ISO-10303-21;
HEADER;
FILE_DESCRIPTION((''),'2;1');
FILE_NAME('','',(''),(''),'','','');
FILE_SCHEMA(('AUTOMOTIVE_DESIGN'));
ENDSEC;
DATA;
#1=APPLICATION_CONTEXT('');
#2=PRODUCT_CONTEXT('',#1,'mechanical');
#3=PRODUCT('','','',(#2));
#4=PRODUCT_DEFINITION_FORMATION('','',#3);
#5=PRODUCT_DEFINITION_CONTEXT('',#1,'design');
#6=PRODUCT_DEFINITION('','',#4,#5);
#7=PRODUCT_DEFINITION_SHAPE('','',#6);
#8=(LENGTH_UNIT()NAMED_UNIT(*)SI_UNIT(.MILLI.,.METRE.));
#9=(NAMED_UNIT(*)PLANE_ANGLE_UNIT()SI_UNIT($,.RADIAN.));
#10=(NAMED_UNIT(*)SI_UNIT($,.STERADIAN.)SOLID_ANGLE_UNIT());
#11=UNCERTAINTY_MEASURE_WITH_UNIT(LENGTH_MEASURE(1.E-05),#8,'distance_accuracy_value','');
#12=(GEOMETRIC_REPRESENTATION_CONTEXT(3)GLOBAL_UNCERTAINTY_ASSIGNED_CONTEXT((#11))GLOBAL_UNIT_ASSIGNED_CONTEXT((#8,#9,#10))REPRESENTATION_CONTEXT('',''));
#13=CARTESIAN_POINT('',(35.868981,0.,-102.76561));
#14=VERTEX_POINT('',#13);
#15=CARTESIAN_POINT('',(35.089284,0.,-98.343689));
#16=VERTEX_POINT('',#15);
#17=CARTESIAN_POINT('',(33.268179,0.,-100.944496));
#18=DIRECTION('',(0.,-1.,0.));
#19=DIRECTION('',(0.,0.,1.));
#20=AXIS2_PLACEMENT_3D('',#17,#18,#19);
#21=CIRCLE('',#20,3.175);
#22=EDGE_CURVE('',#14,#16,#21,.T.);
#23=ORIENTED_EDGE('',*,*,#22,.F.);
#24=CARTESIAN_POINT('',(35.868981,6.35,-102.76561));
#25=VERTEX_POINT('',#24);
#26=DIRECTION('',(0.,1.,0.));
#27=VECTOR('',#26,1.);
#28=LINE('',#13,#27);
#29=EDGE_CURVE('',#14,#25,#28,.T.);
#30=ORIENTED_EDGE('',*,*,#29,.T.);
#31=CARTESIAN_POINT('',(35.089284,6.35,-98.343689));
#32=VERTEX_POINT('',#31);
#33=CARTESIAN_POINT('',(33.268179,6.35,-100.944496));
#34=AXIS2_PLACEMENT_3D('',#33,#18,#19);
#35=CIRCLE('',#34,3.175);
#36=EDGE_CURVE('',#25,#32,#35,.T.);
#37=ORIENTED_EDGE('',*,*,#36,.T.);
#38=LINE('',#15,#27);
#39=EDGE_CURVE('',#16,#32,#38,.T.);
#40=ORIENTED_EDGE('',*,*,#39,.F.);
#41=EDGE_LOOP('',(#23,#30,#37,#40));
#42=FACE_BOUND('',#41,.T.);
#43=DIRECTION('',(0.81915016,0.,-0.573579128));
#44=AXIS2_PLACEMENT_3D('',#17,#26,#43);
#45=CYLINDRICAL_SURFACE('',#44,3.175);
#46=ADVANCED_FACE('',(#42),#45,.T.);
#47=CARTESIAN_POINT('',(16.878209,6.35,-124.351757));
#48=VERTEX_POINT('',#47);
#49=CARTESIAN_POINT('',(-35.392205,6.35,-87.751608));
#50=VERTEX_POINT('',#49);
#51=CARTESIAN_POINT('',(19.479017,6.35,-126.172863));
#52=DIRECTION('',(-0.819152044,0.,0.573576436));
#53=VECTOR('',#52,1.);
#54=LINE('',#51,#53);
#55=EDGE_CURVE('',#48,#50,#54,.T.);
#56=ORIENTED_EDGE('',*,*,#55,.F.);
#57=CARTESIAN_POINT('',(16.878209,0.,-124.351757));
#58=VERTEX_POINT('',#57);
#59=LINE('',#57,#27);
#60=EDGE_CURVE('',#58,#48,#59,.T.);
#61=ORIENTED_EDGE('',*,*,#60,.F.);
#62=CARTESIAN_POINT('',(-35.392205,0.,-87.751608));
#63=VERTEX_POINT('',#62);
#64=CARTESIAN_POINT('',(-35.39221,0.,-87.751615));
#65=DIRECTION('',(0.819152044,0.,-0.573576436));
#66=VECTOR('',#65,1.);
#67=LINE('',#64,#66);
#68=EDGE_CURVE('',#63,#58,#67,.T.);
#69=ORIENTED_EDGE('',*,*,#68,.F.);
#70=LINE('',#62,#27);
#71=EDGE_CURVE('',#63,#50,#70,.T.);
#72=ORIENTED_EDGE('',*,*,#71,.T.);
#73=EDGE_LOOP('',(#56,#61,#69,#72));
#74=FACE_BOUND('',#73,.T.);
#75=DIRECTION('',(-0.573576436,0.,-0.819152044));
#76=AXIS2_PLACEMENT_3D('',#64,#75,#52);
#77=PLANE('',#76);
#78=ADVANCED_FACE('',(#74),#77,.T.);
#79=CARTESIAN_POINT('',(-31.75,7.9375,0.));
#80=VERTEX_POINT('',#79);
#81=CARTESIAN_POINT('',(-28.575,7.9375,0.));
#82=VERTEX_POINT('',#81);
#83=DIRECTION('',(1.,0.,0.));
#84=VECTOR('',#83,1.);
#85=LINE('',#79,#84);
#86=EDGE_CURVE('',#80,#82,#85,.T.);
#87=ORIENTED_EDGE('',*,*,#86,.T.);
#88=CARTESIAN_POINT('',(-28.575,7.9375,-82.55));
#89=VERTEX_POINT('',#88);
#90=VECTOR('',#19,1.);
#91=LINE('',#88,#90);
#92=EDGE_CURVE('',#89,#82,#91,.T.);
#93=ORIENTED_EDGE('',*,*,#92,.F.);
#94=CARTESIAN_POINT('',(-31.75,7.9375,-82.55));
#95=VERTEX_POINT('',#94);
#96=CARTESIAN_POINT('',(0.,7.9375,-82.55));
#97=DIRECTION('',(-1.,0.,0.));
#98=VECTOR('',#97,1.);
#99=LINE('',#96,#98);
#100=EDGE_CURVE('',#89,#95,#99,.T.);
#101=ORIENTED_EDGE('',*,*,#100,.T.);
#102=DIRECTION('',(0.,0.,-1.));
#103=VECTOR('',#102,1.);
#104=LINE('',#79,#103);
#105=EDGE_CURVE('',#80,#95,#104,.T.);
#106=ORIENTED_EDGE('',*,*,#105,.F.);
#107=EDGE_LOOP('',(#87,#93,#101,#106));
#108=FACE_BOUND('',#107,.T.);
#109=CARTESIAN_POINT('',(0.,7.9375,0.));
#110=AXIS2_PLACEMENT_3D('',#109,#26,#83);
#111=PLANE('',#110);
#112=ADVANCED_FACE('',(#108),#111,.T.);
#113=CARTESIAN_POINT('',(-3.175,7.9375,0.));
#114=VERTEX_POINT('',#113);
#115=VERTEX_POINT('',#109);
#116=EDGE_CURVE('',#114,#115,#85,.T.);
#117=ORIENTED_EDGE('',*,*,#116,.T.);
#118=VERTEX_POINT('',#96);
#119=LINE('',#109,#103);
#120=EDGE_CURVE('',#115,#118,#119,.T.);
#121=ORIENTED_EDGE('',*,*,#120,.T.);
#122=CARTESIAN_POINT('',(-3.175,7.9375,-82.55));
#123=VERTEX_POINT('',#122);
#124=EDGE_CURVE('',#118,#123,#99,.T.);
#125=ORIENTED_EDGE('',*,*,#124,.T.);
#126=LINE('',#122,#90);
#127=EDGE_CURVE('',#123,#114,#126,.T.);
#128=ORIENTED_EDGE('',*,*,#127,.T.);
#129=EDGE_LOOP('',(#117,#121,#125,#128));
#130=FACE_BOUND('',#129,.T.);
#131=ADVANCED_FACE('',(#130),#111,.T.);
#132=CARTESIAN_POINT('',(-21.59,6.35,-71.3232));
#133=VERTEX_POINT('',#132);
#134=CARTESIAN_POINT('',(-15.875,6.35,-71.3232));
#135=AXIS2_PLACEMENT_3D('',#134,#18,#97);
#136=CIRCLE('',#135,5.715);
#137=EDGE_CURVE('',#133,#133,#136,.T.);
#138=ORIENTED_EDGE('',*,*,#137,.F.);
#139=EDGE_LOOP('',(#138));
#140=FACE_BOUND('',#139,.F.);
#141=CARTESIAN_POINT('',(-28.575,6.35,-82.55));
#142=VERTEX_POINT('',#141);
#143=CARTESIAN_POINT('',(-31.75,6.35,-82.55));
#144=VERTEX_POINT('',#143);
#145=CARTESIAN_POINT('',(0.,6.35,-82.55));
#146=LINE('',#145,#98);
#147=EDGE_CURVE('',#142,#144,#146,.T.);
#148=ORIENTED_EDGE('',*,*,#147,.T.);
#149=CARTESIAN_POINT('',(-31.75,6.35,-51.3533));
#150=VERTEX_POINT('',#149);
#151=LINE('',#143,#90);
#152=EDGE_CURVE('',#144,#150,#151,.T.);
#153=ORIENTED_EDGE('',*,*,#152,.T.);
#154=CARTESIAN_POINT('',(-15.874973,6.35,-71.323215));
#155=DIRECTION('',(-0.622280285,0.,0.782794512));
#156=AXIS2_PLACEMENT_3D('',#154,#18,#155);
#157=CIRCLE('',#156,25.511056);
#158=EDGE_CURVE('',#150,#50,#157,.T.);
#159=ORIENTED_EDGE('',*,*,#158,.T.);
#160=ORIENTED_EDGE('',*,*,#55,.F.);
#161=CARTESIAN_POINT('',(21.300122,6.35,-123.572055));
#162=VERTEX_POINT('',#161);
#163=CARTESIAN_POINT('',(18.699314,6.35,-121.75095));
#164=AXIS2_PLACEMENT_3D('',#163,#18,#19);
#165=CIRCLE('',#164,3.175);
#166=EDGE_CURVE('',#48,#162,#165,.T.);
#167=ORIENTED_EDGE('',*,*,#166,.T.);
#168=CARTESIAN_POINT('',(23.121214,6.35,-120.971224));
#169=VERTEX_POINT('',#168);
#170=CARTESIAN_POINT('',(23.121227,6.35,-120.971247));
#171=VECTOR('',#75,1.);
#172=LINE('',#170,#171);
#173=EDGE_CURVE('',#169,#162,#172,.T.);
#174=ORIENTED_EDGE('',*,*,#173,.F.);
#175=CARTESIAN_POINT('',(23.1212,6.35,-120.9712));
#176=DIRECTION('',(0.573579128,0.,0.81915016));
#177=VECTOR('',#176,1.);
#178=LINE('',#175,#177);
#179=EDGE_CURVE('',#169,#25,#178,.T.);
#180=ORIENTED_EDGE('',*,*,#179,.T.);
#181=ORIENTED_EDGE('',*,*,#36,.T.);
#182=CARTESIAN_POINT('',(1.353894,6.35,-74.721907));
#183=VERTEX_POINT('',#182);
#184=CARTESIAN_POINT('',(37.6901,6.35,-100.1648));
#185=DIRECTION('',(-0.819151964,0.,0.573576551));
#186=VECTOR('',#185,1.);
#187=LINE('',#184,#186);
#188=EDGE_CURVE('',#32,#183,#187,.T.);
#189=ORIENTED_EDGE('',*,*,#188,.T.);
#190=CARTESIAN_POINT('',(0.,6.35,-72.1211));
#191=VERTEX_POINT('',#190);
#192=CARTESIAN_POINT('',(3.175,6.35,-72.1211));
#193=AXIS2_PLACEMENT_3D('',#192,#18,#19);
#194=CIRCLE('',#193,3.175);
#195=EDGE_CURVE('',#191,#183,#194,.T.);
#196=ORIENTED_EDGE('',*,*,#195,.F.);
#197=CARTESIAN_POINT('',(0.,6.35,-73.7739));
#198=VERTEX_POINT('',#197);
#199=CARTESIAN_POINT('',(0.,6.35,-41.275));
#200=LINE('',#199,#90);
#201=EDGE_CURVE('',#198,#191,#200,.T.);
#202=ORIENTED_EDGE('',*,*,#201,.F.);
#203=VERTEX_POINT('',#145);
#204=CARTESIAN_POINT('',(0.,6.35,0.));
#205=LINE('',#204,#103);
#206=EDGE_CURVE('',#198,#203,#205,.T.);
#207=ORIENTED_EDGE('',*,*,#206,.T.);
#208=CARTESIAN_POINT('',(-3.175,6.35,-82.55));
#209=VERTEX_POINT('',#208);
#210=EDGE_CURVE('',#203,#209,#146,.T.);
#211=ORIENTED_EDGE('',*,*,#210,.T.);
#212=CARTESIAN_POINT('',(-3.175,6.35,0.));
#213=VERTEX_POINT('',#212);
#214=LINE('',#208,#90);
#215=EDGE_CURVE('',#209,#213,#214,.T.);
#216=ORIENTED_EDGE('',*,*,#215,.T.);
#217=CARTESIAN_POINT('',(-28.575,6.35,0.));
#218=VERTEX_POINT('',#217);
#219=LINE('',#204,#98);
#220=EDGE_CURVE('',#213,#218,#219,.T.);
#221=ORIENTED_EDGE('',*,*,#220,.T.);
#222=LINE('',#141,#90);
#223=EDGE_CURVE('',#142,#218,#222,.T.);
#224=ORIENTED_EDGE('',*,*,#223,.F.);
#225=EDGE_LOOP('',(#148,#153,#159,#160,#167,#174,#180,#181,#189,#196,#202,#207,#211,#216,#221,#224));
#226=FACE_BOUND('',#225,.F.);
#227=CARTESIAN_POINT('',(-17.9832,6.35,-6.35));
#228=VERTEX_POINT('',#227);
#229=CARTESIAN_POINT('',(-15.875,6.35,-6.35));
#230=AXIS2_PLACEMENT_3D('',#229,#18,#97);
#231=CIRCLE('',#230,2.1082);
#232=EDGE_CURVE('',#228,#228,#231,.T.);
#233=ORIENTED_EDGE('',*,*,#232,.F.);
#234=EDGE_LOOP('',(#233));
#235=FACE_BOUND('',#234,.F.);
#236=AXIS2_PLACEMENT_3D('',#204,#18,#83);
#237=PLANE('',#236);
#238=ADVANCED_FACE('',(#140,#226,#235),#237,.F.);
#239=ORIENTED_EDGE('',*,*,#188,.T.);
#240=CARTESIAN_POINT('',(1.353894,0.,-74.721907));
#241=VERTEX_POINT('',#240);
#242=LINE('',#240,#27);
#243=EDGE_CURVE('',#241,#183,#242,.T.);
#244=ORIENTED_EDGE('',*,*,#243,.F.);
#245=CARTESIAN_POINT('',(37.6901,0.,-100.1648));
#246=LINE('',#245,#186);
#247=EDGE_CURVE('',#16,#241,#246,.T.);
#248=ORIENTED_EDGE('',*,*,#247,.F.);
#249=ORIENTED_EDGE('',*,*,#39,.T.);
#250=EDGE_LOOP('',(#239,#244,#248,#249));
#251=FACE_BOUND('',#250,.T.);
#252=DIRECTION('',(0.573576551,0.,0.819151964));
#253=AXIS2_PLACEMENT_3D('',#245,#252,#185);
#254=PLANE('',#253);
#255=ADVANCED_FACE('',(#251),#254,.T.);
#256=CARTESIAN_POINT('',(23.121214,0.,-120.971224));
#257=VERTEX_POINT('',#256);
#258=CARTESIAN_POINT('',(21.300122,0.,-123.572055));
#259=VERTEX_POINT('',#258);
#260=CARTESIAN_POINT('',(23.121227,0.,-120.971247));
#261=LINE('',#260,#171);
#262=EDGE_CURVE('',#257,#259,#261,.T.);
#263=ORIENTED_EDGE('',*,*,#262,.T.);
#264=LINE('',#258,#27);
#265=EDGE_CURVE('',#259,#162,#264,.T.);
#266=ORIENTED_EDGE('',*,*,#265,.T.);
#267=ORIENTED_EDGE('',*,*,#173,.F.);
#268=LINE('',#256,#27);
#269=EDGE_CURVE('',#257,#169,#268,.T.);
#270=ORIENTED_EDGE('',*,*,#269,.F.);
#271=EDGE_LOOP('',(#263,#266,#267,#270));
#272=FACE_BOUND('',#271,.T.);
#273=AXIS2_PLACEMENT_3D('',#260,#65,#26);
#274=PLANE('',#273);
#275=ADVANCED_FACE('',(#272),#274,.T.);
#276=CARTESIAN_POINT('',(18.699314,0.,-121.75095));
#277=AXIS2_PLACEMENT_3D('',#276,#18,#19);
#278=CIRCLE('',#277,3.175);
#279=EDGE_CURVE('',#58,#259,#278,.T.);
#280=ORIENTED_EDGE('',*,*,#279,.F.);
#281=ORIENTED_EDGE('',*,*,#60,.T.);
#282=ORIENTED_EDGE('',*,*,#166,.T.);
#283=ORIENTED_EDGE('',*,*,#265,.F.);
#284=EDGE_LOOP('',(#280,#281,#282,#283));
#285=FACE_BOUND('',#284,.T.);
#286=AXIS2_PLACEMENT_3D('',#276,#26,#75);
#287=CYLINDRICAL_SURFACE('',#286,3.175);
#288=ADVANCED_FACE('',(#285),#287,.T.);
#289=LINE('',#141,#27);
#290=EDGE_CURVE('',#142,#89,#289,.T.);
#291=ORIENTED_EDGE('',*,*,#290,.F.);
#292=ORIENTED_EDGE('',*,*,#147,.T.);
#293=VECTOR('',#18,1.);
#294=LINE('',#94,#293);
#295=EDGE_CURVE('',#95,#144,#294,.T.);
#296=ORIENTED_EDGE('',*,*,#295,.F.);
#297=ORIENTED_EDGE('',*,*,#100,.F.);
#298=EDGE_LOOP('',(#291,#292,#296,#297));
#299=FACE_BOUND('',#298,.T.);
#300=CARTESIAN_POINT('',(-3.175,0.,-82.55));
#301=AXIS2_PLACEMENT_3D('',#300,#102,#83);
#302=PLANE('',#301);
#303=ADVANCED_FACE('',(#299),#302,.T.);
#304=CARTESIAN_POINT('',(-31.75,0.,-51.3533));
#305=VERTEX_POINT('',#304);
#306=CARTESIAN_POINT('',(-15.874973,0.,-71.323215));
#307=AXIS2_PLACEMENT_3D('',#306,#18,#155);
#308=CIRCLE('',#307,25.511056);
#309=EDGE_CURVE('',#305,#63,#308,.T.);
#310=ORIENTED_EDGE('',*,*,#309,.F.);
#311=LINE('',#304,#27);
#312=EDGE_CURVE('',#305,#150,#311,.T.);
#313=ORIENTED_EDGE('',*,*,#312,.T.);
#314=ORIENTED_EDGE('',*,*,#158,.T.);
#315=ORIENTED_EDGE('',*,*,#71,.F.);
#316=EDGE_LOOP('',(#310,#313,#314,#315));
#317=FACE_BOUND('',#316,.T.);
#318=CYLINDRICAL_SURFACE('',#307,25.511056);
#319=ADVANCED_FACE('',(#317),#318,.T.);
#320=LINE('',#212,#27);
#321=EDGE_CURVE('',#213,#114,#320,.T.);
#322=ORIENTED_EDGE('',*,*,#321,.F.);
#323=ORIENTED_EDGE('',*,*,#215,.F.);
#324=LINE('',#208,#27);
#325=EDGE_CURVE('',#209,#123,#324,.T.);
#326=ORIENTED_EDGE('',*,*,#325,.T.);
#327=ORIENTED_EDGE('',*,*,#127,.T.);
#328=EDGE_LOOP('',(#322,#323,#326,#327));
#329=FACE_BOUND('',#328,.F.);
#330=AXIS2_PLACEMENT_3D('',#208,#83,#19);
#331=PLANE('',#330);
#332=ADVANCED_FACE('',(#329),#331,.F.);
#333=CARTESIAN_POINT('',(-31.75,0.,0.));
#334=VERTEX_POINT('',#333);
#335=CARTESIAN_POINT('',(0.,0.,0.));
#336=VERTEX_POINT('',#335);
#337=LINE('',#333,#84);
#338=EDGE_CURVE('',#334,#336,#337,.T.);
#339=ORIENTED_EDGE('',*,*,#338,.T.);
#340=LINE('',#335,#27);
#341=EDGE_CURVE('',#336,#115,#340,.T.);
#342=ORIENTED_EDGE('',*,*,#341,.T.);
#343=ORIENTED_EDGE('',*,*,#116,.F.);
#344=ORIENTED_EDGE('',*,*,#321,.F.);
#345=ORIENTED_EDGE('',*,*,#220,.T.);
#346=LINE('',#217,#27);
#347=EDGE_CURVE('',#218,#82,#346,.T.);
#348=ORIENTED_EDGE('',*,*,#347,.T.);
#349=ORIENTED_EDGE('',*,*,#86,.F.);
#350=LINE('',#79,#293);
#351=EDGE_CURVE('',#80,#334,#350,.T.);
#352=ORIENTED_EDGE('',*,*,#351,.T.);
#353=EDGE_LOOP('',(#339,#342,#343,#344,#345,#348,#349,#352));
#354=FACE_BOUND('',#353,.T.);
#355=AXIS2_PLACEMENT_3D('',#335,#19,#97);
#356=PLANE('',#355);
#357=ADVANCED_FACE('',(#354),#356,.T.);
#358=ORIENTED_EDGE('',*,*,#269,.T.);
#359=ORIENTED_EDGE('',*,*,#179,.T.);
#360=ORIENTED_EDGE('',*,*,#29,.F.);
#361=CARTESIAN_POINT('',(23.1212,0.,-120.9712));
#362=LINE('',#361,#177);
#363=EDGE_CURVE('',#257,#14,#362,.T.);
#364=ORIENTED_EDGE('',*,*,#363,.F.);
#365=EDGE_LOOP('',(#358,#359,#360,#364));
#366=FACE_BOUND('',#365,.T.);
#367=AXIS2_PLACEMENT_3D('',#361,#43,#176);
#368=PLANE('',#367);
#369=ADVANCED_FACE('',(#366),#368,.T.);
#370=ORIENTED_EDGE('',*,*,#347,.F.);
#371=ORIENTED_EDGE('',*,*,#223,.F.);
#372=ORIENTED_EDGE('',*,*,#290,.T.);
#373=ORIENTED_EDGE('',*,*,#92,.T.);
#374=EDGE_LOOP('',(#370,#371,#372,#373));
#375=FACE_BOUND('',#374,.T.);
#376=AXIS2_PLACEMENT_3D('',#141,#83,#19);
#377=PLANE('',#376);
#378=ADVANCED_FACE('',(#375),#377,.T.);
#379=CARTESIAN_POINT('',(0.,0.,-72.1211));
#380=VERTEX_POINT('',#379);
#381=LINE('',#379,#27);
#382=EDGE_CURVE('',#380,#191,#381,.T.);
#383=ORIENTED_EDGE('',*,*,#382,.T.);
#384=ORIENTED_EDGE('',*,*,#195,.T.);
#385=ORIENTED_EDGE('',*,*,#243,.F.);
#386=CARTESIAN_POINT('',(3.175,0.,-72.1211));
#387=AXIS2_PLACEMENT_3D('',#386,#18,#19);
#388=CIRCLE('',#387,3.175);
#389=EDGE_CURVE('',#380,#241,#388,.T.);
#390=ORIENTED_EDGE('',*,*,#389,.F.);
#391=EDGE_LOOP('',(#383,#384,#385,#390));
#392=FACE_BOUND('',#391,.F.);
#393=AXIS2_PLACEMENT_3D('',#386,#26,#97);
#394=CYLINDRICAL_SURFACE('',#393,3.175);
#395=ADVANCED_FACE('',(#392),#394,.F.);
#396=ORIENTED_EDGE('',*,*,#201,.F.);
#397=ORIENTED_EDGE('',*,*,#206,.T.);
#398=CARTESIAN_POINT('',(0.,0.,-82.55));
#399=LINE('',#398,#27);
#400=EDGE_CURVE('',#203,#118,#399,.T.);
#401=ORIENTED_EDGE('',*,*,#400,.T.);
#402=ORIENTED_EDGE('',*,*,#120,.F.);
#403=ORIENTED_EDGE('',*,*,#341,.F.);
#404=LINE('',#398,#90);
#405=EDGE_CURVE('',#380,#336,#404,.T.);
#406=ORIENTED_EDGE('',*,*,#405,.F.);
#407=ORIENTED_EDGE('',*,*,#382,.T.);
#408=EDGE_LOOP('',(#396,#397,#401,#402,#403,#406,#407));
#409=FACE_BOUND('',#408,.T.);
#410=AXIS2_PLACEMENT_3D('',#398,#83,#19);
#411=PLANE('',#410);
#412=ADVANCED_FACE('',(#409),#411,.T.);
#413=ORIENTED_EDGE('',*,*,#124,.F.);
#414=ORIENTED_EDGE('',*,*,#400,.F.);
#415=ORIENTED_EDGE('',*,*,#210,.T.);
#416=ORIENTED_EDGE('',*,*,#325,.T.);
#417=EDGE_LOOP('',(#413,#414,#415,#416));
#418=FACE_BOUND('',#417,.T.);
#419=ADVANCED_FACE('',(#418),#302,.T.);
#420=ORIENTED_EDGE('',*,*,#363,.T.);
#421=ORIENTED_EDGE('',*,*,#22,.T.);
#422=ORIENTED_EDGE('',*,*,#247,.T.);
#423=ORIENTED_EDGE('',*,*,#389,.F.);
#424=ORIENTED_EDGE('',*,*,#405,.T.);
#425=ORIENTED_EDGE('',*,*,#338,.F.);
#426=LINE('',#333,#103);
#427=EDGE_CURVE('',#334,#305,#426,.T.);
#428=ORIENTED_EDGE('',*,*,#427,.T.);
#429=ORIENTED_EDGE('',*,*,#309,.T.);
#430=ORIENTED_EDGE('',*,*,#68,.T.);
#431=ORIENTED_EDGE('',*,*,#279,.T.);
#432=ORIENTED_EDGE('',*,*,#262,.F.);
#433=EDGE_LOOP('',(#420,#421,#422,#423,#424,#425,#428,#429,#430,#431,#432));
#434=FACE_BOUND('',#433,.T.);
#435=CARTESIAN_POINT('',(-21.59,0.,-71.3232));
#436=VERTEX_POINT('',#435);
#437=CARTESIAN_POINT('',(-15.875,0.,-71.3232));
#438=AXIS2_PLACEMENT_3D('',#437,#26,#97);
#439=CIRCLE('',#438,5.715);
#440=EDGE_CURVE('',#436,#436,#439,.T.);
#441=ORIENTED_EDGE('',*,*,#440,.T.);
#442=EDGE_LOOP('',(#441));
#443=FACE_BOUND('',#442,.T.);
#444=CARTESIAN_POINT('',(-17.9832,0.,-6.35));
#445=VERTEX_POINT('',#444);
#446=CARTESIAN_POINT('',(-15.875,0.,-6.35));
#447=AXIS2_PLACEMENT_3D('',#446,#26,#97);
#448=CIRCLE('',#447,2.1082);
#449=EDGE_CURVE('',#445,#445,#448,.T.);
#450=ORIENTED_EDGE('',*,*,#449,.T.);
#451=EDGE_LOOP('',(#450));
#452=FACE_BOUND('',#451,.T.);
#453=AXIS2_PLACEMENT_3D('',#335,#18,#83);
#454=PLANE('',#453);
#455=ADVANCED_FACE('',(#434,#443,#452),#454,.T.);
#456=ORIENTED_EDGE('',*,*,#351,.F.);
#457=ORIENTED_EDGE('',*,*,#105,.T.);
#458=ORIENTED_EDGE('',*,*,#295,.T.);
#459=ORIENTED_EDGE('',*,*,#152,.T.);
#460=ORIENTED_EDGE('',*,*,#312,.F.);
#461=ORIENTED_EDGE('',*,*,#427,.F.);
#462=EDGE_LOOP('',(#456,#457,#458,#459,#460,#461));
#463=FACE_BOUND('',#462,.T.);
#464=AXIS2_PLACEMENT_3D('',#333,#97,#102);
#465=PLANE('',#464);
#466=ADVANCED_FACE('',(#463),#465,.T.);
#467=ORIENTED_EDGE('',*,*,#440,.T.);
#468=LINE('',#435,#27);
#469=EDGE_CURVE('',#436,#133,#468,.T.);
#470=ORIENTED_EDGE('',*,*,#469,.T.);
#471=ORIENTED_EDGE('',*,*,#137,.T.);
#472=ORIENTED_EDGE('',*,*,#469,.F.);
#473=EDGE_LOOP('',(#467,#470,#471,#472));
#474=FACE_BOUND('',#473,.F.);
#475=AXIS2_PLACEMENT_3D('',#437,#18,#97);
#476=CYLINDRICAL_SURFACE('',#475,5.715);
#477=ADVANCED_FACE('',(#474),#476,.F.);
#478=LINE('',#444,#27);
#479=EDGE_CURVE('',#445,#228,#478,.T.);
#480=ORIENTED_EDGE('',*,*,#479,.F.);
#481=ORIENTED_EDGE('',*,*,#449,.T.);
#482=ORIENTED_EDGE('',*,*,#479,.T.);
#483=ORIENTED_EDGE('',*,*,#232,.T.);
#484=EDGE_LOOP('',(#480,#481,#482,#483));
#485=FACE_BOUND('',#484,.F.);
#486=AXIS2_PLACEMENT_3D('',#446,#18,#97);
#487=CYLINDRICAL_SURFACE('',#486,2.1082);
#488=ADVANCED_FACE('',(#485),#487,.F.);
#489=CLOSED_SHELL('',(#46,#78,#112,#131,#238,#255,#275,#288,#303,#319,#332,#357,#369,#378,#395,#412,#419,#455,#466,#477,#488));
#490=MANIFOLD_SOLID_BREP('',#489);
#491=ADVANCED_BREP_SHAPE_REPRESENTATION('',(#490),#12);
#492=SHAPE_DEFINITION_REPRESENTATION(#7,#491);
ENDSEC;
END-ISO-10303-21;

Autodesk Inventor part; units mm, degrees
ref_plane "YZ Plane" through (0, 0, 0) normal (1, 0, 0) x (0, 1, 0)
ref_plane "XZ Plane" through (0, 0, 0) normal (0, 1, 0) x (-1, 0, 0)
ref_plane "XY Plane" through (0, 0, 0) normal (0, 0, 1) x (1, 0, 0)
sketch "Sketch1" plane through (0, 0, 0) normal (0, 1, 0) x (-1, 0, 0)
  line L0 (0, 0) -> (31.75, 0)
  line L1 (31.75, 0) -> (31.75, -82.55)
  line L2 (31.75, -82.55) -> (0, -82.55)
  line L3 (0, -82.55) -> (0, 0)
  line L4 (31.75, -82.55) -> (28.575, -82.55)
  line L5 (0, -82.55) -> (3.175, -82.55)
  line L6 (3.175, -82.55) -> (0, -82.55)
  line L7 (0, -82.55) -> (0, 0)
  line L8 (0, 0) -> (3.175, 0)
  line L9 (3.175, 0) -> (3.175, -82.55)
  line L10 (28.575, -82.55) -> (31.75, -82.55)
  line L11 (31.75, -82.55) -> (31.75, 0)
  line L12 (31.75, 0) -> (28.575, 0)
  line L13 (28.575, 0) -> (28.575, -82.55)
  line L14 (15.875, 0) -> (15.875, -6.35)
  circle A0 centre (15.875, -6.35) radius 2.1082
  line L15 (15.875, -6.35) -> (15.875, -71.3232)
  circle A1 centre (15.875, -71.3232) radius 5.715
  dimension "d0" = 31.75
  dimension "d1" = 3.175
  dimension "d2" = 3.175
  dimension "d3" = 82.55
  dimension "d4" = 6.35
  dimension "d5" = 4.2164
  dimension "d6" = 64.9732
  dimension "d13" = 11.43
extrude "Extrusion1" add sketch "Sketch1" along normal blind 6.35
sketch "Sketch2" plane through (0, 6.35, 0) normal (0, 1, 0) x (1, 0, 0)
  line L0 (-31.75, 0) -> (0, 0) projected
  line L1 (-31.75, 0) -> (-28.575, 0)
  line L2 (0, 0) -> (-3.175, 0)
  line L3 (0, 82.55) -> (-31.75, 82.55) projected
  line L4 (-28.575, 0) -> (-31.75, 0)
  line L5 (-31.75, 0) -> (-31.75, 82.55)
  line L6 (-31.75, 82.55) -> (-28.575, 82.55)
  line L7 (-28.575, 82.55) -> (-28.575, 0)
  line L8 (-3.175, 0) -> (0, 0)
  line L9 (0, 0) -> (0, 82.55)
  line L10 (0, 82.55) -> (-3.175, 82.55)
  line L11 (-3.175, 82.55) -> (-3.175, 0)
  dimension "d9" = 3.175
  dimension "d10" = 3.175
extrude "Extrusion2" add sketch "Sketch2" along normal blind 1.5875 contours L5 L3 L7 L0 | L11 L3 L9 L0
sketch "Sketch3" plane through (0, 0, 0) normal (0, -1, 0) x (1, 0, 0)
  line L0 (-31.75, -82.55) -> (-31.75, 0) projected
  line L1 (-31.75, -82.55) -> (-16.4111, -93.2904)
  line L2 (0, -82.55) -> (-31.75, -82.55) projected
  line L3 (-16.4111, -93.2904) -> (23.1212, -120.9712)
  line L4 (23.1212, -120.9712) -> (37.6901, -100.1648)
  line L5 (37.6901, -100.1648) -> (0, -73.7739)
  line L6 (0, 0) -> (0, -82.55) projected
  line L7 (-31.75, -82.55) -> (0, -82.55)
  dimension "d14" = 35
  dimension "d15" = 48.26
  dimension "d16" = 25.4
extrude "Extrusion3" add sketch "Sketch3" against normal blind 6.35
sketch "Sketch4" plane through (-31.75, 0, -82.55) normal (-0.5735764, 0, -0.819152) x (-0.819152, 0, 0.5735764)
  line L0 (-20.9743, 6.35) -> (-66.9854, 6.35) projected
  line L1 (0, 0) -> (0, 6.35) projected
  line L2 (-66.9854, 6.35) -> (0, 6.35)
  line L3 (0, 6.35) -> (0, 0)
  line L4 (0, 0) -> (-66.9854, 0)
  line L5 (-66.9854, 0) -> (-66.9854, 6.35)
  point P0 (21.3407, 0)
  point P1 (-20.9743, 6.35)
extrude "Extrusion4" add sketch "Sketch4" along normal blind 6.35
sketch "Sketch5" plane through (0, 0, 0) normal (0, -1, 0) x (1, 0, 0)
  circle A0 centre (-15.875, -71.3232) radius 5.715 projected
  arc A1 (-31.75, -51.3533) -> (-35.3922, -87.7516) centre (-15.875, -71.3232) ccw
  line L0 (-31.75, -82.55) -> (-31.75, 0) projected
  line L1 (-31.75, -82.55) -> (-35.3922, -87.7516) projected
  line L2 (-31.75, -51.3533) -> (-31.75, -82.55)
  line L3 (-31.75, -82.55) -> (-35.3922, -87.7516)
  point P0 (0, 0)
extrude "Extrusion5" add sketch "Sketch5" against normal blind 6.35 contours L0 L1 A1
fillet "Fillet2" radius 3.175 3 edges at (0, 3.175, -73.7739) (19.479, 3.175, -126.1729) (37.6901, 3.175, -100.1648)
properties part number "intake sleds"
